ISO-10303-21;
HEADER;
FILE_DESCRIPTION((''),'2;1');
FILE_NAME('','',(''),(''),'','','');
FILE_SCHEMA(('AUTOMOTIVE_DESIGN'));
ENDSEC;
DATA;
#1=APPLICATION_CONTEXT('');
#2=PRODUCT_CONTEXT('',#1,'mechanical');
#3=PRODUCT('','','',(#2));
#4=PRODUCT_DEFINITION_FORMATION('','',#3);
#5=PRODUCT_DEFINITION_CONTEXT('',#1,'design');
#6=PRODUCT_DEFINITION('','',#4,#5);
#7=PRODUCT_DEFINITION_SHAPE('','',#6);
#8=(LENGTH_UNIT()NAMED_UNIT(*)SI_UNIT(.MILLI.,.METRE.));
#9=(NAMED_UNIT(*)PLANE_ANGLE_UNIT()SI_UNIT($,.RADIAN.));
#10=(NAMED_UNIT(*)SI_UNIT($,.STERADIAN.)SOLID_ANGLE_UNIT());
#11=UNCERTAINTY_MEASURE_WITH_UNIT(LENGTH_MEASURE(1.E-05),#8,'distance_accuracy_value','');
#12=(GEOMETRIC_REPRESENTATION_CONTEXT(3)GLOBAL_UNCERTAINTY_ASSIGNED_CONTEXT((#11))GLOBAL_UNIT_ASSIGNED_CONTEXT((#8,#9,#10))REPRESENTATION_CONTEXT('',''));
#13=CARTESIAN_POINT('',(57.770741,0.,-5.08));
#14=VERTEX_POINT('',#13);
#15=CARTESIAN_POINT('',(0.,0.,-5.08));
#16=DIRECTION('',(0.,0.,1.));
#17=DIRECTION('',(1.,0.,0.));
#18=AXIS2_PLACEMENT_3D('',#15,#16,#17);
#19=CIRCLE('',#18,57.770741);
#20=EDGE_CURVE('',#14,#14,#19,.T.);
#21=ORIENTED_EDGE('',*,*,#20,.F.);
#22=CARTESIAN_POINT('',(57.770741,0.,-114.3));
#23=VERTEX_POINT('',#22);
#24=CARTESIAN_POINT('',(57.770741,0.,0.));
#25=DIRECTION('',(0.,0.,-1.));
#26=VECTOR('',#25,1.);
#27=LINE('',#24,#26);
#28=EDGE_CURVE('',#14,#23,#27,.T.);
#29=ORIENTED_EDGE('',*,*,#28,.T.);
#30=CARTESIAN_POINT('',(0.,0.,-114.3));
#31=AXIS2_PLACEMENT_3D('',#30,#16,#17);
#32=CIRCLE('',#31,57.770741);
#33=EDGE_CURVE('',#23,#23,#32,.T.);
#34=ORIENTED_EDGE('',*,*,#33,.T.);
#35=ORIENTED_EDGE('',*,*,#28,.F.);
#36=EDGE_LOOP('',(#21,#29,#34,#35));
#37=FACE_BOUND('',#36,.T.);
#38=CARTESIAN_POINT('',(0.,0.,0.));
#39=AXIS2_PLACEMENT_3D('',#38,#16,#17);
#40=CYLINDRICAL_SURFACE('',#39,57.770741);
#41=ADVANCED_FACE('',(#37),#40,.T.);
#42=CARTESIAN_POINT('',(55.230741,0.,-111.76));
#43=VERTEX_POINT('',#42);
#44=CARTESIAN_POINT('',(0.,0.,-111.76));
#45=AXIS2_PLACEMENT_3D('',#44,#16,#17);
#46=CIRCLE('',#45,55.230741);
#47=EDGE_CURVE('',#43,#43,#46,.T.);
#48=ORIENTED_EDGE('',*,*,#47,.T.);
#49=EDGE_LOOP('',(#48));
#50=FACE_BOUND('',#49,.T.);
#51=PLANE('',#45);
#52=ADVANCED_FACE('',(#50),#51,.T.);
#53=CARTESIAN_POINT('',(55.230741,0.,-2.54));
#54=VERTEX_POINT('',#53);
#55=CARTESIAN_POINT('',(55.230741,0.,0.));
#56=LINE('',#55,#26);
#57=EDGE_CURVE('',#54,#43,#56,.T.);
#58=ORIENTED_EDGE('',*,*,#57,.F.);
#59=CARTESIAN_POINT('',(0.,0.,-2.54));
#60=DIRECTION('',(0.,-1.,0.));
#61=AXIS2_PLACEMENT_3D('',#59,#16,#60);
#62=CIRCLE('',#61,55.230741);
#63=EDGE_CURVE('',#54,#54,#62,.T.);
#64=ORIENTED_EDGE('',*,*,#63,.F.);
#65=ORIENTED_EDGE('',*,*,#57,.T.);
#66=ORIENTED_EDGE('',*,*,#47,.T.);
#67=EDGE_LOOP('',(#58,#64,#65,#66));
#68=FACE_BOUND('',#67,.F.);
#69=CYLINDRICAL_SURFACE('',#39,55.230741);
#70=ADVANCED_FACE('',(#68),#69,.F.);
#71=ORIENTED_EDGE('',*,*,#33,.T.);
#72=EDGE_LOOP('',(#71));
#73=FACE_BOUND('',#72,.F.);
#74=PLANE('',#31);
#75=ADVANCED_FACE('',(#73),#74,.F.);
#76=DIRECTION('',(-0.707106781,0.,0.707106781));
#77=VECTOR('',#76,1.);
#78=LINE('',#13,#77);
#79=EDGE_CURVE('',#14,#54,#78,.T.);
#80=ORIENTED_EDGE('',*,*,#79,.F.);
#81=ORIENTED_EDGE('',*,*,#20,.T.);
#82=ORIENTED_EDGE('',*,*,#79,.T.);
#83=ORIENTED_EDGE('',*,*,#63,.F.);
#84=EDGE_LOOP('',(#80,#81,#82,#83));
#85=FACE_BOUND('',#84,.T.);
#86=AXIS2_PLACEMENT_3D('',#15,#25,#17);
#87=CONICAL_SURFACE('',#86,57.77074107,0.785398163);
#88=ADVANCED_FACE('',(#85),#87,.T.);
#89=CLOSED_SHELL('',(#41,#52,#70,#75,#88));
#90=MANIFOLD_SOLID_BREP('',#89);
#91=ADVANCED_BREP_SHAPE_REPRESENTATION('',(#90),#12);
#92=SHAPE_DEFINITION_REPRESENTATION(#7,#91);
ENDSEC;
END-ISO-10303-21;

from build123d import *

# Parameters (mm, degrees)
F0_R     = 57.7707410697
F1_DEPTH = 114.3
F2_T     = -2.54


# Not quite as in the source:
# - a fillet or chamfer that OpenCascade refuses, or shapes differently, is made with other operations: its cross-section is extruded or revolved along the edge and cut away or added
# - the program builds the solid bodies; features that only make, move or delete a surface that nothing else refers to are left out


with BuildPart() as f1:
    # F0 (on Top) → F1 (new body)
    with BuildSketch(Plane.XY):
        Circle(F0_R)
    extrude(amount=-F1_DEPTH)

    # F2
    f2_openings = [f1.faces().sort_by_distance(p)[0] for p in [
        (0, 0, 0),
    ]]
    offset(amount=F2_T, openings=f2_openings)

    # F3: chamfer of 5.08 on 1 edges, made by hand

    # F3_s1 → F3_t2 (revolve, cut)
    with BuildSketch(Plane.XZ):
        Polygon((57.7707410697, -5.08), (52.6907410697, 0), (57.7707410697, 0), align=None)
    revolve(axis=Axis((0, 0, 0), (0, 0, 1)), mode=Mode.SUBTRACT)


solid = f1.part
